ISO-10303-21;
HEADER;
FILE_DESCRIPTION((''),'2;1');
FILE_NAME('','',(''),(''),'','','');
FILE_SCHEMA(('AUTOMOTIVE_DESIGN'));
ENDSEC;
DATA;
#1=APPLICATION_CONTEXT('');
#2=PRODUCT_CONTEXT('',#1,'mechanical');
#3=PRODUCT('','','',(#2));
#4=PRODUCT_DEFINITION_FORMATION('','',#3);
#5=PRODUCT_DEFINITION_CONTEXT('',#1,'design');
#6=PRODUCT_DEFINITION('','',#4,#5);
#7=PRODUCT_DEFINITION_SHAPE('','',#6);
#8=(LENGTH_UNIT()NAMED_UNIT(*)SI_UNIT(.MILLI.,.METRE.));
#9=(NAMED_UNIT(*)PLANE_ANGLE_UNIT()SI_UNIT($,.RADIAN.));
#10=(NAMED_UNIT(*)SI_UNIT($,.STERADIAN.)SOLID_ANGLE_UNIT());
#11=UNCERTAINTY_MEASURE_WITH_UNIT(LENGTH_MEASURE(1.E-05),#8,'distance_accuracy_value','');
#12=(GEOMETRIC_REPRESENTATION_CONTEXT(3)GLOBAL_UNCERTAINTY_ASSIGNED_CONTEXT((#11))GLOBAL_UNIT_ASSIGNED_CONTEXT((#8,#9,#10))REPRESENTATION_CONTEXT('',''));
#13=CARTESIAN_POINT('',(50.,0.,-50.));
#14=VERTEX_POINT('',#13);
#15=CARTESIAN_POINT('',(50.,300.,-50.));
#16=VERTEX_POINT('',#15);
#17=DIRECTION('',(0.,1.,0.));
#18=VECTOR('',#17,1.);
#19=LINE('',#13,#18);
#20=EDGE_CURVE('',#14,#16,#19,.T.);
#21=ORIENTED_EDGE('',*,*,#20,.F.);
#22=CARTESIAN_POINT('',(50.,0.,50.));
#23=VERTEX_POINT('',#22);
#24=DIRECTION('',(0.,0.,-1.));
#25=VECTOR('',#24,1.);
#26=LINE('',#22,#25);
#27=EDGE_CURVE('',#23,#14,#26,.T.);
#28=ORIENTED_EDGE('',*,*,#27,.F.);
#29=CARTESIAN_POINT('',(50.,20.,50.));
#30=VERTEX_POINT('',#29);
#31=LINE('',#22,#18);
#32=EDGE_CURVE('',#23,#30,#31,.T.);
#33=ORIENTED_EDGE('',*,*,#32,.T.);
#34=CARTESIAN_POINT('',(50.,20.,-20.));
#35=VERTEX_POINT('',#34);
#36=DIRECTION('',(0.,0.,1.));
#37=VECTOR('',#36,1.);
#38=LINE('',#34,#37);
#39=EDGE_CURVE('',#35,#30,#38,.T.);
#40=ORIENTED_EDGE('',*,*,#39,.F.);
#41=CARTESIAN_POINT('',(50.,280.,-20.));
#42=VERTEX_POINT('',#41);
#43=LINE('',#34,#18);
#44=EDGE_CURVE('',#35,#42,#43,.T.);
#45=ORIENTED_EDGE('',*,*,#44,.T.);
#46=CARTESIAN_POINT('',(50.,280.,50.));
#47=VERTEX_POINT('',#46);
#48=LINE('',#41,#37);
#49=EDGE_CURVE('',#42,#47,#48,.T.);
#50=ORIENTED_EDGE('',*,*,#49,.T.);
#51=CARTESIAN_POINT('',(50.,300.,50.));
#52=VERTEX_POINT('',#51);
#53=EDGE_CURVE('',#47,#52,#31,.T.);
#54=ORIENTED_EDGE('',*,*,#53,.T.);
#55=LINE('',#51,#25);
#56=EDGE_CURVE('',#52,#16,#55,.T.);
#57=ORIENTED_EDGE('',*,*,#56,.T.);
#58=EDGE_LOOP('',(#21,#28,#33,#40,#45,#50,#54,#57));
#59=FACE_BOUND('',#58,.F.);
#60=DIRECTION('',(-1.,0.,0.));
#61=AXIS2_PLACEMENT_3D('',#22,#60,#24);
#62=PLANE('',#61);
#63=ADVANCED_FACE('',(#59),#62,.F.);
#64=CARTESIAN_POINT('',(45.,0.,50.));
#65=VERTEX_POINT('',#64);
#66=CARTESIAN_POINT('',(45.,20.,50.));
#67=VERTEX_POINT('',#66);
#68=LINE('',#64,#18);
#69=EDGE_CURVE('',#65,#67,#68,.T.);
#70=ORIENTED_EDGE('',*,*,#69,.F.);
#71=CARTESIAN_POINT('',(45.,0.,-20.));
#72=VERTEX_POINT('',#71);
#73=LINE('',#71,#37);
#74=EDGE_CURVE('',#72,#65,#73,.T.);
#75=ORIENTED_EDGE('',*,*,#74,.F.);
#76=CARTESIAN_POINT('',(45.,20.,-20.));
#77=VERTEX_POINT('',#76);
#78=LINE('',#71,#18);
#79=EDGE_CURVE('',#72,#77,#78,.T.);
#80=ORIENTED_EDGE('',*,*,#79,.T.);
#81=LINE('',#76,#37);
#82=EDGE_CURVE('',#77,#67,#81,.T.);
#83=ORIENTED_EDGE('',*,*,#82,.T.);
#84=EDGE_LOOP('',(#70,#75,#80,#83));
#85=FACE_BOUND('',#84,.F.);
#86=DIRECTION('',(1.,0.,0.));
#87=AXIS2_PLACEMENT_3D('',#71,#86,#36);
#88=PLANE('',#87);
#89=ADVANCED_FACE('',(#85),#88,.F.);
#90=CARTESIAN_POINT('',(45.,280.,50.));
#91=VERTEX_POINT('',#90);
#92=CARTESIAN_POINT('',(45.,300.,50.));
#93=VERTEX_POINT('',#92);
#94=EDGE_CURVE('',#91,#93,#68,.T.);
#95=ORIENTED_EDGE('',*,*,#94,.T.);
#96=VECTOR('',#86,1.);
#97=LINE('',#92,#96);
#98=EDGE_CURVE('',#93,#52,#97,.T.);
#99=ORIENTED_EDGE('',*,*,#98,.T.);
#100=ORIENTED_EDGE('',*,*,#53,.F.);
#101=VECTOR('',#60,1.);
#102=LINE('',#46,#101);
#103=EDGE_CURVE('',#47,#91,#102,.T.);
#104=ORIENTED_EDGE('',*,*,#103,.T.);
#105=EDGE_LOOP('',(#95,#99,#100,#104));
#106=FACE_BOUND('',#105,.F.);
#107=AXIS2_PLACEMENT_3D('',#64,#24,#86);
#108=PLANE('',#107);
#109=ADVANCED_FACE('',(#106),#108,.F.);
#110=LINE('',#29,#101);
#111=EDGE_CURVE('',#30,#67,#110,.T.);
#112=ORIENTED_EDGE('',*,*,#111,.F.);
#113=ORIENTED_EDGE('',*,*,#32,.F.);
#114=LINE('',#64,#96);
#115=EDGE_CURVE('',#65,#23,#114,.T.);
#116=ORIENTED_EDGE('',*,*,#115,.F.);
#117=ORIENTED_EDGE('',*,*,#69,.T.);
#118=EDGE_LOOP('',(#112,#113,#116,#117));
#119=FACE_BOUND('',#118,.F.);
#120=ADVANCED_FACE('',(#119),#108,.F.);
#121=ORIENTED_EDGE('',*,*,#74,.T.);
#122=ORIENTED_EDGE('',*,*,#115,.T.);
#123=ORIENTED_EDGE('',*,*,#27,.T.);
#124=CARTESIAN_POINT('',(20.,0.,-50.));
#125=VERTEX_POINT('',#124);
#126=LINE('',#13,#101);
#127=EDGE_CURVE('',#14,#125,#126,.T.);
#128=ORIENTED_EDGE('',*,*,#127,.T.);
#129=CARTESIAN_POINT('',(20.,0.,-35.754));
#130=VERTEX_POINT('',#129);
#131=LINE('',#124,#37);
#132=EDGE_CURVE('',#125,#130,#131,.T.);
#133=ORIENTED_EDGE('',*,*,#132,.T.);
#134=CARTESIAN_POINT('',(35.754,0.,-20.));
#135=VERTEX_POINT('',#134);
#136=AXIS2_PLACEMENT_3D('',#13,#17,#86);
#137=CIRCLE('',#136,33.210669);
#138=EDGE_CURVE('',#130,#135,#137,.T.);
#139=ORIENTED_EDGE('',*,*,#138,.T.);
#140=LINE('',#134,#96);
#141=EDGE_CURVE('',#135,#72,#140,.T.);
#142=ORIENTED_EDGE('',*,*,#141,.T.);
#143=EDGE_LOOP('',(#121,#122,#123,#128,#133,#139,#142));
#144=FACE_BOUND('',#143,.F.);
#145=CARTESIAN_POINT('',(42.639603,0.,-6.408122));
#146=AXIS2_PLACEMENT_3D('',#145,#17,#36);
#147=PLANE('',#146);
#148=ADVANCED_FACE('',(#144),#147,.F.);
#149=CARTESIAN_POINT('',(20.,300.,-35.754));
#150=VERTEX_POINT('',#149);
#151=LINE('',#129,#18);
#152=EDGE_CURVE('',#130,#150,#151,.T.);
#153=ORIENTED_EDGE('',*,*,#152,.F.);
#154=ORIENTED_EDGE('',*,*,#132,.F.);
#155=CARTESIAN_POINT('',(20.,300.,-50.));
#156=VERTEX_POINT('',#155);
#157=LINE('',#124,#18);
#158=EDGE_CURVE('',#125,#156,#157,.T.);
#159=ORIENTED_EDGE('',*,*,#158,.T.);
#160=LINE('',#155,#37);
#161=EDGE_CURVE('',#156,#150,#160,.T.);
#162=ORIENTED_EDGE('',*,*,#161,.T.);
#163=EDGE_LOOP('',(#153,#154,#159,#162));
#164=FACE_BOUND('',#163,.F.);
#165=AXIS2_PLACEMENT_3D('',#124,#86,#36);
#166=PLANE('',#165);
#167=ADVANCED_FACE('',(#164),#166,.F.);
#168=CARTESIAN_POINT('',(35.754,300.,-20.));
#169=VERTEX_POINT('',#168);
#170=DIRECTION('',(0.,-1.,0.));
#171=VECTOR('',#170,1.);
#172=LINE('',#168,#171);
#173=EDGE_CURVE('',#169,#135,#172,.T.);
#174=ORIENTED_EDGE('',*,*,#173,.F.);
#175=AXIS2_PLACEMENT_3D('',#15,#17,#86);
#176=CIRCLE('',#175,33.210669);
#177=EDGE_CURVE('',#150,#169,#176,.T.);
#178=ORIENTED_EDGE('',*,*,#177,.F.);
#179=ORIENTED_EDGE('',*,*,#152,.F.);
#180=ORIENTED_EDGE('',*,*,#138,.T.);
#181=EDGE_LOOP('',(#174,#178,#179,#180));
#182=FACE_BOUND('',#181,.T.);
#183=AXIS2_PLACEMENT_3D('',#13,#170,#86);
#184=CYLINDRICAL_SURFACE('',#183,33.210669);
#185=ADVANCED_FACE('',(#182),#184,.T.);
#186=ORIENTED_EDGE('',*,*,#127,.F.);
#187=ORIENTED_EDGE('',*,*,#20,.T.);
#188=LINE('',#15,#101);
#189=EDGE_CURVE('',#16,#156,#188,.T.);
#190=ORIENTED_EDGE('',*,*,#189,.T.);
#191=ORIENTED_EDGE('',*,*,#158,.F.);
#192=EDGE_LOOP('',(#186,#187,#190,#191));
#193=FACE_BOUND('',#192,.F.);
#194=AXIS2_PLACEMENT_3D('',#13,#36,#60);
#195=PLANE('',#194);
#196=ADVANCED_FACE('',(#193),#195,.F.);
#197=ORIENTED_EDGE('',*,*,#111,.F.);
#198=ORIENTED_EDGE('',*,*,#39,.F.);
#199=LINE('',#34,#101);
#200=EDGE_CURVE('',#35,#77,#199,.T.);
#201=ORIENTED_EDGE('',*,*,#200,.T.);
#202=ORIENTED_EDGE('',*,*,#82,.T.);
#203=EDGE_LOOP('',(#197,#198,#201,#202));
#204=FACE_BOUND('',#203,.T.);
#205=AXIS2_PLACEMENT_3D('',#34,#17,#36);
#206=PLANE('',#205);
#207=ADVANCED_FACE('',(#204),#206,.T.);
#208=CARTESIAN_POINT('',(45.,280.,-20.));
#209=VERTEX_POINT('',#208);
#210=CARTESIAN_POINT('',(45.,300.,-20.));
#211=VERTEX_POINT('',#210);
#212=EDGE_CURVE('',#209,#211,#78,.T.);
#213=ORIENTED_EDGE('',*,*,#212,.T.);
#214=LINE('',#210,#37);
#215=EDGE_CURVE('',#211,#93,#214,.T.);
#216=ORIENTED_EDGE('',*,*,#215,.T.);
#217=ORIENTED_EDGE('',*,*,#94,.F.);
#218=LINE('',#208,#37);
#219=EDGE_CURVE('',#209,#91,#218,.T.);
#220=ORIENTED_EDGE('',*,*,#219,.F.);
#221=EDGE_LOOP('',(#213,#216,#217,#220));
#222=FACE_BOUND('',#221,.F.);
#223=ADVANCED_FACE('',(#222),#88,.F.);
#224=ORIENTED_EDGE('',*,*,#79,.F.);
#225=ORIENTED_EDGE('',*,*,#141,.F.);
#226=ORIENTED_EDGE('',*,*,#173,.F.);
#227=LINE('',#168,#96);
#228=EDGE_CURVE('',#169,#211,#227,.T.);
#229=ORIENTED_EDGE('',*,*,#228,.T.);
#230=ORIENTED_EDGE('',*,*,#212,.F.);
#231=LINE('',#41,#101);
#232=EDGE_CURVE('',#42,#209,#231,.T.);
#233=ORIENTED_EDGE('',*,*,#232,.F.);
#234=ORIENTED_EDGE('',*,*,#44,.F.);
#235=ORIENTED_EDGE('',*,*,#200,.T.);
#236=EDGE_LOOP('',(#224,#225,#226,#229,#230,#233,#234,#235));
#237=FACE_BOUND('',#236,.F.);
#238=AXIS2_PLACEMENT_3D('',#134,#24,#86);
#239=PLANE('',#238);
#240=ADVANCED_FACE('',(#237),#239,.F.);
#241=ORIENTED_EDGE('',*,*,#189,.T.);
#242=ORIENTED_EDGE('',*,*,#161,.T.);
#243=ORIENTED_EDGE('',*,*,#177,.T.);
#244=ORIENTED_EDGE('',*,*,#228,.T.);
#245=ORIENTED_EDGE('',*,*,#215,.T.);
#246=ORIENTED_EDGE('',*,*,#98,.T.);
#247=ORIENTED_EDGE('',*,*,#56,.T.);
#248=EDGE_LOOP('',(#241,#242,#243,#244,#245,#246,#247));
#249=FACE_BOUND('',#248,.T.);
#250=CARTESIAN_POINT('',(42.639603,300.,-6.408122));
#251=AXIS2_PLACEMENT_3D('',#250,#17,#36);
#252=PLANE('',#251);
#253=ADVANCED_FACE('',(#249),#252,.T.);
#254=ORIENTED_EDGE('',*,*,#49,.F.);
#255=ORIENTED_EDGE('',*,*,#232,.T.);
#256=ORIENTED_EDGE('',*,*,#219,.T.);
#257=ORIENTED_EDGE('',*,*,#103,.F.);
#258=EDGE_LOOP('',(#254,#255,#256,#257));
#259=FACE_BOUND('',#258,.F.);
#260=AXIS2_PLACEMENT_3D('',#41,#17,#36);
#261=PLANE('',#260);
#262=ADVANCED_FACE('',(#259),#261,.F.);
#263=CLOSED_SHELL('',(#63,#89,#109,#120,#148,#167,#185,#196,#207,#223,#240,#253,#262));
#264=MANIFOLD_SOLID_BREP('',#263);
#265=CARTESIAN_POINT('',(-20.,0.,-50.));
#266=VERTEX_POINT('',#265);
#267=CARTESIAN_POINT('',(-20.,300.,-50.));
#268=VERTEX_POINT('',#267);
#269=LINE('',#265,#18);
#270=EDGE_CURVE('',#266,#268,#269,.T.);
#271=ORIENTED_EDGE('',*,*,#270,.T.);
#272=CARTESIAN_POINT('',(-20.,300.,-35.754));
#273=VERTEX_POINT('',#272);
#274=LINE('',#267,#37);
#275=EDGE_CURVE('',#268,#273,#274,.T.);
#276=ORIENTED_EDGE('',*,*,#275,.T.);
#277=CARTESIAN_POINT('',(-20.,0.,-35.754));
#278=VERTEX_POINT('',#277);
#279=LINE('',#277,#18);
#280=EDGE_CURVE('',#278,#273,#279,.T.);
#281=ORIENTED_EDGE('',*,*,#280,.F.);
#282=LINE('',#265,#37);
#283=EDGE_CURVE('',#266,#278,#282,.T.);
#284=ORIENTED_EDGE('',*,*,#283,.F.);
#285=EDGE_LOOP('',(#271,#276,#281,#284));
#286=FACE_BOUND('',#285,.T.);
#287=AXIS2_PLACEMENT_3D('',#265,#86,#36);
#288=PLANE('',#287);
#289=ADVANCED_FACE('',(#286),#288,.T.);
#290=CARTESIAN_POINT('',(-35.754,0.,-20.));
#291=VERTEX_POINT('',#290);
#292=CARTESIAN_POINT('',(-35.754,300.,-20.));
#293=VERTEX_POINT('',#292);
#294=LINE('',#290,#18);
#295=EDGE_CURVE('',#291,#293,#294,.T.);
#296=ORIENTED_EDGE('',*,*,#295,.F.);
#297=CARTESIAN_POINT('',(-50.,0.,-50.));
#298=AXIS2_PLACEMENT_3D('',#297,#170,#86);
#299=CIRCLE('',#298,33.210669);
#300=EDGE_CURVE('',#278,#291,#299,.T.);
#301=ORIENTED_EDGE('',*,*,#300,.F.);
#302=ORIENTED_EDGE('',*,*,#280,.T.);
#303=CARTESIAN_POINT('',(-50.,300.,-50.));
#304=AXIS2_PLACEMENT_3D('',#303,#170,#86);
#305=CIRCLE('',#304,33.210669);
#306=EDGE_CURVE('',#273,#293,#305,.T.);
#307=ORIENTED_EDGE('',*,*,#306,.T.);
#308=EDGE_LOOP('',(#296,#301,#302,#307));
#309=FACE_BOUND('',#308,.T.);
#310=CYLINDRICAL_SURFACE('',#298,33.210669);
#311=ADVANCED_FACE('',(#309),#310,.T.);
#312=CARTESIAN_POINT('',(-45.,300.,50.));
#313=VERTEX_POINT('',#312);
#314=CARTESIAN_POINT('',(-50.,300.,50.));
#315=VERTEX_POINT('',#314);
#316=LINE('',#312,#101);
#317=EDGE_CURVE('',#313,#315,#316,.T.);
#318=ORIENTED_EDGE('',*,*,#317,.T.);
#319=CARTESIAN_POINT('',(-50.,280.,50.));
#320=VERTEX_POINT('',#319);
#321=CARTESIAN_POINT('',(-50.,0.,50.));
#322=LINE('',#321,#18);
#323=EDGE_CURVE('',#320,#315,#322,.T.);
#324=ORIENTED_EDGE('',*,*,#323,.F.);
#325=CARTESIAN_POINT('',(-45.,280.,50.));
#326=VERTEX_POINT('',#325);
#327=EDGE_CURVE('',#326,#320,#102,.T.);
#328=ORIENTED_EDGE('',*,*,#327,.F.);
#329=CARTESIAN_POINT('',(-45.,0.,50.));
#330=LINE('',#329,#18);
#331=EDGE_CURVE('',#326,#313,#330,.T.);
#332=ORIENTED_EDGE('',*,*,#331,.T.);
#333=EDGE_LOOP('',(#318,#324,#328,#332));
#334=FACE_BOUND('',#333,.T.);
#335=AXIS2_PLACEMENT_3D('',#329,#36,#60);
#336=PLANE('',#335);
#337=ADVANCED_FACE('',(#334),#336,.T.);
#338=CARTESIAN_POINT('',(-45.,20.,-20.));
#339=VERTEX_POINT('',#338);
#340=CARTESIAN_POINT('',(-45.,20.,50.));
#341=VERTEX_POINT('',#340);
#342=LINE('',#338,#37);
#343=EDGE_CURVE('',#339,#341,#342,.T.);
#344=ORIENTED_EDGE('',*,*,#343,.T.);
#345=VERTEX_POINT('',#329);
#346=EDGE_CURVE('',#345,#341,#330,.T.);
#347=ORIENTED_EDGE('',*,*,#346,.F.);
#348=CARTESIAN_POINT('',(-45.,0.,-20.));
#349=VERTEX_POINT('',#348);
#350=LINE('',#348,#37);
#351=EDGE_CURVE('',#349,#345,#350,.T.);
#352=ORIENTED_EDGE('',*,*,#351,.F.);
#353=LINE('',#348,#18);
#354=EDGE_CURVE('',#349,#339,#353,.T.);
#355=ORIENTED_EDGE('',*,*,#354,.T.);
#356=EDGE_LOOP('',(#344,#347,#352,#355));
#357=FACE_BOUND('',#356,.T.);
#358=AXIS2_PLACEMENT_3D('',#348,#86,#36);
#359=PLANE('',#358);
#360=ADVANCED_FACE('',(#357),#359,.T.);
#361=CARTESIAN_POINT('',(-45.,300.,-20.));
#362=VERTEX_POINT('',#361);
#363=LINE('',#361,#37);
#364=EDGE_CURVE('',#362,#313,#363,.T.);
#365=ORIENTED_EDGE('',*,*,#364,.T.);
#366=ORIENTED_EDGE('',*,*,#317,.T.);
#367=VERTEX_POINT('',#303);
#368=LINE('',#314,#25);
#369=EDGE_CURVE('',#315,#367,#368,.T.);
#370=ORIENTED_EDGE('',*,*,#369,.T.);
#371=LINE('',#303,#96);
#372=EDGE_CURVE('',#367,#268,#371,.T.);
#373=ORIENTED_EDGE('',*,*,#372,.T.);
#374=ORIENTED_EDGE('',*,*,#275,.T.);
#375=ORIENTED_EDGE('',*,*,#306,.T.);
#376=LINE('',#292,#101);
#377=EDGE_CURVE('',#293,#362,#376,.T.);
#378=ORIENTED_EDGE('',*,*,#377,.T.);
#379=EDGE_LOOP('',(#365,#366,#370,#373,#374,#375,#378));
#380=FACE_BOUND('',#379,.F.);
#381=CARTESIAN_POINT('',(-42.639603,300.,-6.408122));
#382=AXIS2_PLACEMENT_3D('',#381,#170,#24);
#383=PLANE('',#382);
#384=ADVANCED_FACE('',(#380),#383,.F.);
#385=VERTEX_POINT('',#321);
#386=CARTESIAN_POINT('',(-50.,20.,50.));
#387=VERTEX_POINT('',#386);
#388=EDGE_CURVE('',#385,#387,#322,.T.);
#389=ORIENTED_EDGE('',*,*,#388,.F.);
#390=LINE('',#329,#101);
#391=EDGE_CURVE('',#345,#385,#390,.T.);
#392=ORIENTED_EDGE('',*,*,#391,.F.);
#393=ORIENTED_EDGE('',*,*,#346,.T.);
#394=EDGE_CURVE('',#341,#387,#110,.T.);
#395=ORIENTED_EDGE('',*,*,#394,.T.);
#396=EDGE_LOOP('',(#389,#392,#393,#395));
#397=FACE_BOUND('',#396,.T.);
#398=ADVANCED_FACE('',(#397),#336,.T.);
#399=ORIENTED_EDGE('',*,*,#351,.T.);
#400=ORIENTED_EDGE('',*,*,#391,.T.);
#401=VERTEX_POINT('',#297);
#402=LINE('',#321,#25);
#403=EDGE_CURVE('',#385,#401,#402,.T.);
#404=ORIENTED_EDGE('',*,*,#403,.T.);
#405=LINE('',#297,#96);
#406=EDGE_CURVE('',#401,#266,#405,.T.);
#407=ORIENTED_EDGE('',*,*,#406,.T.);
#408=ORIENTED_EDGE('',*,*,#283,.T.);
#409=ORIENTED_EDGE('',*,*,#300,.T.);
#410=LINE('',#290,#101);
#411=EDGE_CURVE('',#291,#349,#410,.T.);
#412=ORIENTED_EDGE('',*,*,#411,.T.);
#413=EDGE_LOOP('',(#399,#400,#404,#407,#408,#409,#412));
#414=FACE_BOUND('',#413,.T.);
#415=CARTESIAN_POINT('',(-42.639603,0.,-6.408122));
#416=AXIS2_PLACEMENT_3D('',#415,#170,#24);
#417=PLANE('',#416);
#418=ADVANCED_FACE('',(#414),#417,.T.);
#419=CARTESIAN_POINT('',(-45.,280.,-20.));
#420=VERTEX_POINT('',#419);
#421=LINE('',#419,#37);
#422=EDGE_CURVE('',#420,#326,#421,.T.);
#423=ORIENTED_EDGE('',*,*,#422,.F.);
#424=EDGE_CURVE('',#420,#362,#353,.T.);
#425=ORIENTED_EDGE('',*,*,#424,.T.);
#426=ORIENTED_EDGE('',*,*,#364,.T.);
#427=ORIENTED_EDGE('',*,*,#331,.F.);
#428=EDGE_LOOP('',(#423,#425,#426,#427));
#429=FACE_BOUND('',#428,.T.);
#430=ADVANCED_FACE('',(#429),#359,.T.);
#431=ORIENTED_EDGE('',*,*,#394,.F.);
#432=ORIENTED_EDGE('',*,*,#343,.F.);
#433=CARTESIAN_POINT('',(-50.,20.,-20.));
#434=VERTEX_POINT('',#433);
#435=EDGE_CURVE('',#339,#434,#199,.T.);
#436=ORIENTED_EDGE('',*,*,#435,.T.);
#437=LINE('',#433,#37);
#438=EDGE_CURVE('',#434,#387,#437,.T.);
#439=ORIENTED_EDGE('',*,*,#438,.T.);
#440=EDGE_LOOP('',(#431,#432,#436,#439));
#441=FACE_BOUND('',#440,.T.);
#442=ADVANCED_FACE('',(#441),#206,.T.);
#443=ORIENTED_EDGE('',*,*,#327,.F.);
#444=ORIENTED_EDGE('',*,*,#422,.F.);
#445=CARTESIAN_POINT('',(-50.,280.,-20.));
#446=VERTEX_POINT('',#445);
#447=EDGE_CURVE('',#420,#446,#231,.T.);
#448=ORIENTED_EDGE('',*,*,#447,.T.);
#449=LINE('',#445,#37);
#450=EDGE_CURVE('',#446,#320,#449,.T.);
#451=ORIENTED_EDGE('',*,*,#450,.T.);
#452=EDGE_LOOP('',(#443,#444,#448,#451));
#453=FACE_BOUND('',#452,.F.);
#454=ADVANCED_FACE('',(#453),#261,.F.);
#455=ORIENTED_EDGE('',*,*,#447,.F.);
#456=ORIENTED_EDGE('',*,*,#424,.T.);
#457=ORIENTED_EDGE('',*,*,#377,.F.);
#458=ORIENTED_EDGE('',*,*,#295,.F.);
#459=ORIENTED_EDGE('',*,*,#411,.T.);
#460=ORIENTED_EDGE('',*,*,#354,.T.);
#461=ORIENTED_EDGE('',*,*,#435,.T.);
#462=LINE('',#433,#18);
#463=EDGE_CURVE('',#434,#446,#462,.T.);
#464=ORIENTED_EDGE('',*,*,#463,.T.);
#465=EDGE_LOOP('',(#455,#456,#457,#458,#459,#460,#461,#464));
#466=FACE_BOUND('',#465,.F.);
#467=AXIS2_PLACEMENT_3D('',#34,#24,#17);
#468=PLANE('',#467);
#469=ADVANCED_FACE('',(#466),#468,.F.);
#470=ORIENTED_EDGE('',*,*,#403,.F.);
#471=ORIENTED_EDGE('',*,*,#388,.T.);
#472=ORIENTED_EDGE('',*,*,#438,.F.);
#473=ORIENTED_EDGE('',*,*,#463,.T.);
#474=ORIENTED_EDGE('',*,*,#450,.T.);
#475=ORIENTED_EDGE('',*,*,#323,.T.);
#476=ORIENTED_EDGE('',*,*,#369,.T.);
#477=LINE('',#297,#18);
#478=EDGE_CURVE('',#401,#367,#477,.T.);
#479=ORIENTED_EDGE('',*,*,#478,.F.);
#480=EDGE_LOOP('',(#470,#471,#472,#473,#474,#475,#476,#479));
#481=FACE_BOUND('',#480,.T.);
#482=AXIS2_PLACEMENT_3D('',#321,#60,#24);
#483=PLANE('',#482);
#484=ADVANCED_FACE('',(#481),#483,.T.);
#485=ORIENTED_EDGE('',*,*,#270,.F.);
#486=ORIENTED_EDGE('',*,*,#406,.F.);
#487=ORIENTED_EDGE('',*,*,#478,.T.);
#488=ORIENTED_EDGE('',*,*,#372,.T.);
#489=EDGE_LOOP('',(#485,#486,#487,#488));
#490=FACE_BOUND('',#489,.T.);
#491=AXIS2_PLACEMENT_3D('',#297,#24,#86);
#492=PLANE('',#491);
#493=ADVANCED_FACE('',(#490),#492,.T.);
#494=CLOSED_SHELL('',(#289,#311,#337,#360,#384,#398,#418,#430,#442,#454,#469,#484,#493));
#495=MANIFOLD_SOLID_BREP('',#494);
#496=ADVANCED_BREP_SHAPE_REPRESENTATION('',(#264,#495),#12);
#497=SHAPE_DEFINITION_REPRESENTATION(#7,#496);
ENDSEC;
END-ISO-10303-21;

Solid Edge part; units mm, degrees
sketch "Sketch1" plane through (0, 0, 0) normal (0, -1, 0) x (1, 0, 0)
  line L0 (35.754, -20) -> (45, -20)
  line L1 (45, -20) -> (45, 50)
  line L2 (45, 50) -> (50, 50)
  line L3 (50, 50) -> (50, -50)
  line L4 (50, -50) -> (20, -50)
  line L5 (20, -50) -> (20, -35.754)
  arc A0 (20, -35.754) -> (35.754, -20) centre (50, -50) cw
  line L6 (-50, 50) -> (-50, -50)
  line L7 (-50, -50) -> (-20, -50)
  line L8 (-20, -50) -> (-20, -35.754)
  arc A1 (-20, -35.754) -> (-35.754, -20) centre (-50, -50) ccw
  line L9 (-35.754, -20) -> (-45, -20)
  line L10 (-45, -20) -> (-45, 50)
  line L11 (-45, 50) -> (-50, 50)
extrude "Protrusion1" add sketch "Sketch1" against normal blind 300
sketch "Sketch2" plane through (50, 150, 0) normal (1, 0, 0) x (0, 1, 0)
  line L0 (-130, -20) -> (-130, 50)
  line L1 (130, 50) -> (-130, 50)
  line L2 (130, -20) -> (130, 50)
  line L3 (-130, -20) -> (130, -20)
extrude "ExtrudedCutout_1" cut sketch "Sketch2" against normal blind 100
